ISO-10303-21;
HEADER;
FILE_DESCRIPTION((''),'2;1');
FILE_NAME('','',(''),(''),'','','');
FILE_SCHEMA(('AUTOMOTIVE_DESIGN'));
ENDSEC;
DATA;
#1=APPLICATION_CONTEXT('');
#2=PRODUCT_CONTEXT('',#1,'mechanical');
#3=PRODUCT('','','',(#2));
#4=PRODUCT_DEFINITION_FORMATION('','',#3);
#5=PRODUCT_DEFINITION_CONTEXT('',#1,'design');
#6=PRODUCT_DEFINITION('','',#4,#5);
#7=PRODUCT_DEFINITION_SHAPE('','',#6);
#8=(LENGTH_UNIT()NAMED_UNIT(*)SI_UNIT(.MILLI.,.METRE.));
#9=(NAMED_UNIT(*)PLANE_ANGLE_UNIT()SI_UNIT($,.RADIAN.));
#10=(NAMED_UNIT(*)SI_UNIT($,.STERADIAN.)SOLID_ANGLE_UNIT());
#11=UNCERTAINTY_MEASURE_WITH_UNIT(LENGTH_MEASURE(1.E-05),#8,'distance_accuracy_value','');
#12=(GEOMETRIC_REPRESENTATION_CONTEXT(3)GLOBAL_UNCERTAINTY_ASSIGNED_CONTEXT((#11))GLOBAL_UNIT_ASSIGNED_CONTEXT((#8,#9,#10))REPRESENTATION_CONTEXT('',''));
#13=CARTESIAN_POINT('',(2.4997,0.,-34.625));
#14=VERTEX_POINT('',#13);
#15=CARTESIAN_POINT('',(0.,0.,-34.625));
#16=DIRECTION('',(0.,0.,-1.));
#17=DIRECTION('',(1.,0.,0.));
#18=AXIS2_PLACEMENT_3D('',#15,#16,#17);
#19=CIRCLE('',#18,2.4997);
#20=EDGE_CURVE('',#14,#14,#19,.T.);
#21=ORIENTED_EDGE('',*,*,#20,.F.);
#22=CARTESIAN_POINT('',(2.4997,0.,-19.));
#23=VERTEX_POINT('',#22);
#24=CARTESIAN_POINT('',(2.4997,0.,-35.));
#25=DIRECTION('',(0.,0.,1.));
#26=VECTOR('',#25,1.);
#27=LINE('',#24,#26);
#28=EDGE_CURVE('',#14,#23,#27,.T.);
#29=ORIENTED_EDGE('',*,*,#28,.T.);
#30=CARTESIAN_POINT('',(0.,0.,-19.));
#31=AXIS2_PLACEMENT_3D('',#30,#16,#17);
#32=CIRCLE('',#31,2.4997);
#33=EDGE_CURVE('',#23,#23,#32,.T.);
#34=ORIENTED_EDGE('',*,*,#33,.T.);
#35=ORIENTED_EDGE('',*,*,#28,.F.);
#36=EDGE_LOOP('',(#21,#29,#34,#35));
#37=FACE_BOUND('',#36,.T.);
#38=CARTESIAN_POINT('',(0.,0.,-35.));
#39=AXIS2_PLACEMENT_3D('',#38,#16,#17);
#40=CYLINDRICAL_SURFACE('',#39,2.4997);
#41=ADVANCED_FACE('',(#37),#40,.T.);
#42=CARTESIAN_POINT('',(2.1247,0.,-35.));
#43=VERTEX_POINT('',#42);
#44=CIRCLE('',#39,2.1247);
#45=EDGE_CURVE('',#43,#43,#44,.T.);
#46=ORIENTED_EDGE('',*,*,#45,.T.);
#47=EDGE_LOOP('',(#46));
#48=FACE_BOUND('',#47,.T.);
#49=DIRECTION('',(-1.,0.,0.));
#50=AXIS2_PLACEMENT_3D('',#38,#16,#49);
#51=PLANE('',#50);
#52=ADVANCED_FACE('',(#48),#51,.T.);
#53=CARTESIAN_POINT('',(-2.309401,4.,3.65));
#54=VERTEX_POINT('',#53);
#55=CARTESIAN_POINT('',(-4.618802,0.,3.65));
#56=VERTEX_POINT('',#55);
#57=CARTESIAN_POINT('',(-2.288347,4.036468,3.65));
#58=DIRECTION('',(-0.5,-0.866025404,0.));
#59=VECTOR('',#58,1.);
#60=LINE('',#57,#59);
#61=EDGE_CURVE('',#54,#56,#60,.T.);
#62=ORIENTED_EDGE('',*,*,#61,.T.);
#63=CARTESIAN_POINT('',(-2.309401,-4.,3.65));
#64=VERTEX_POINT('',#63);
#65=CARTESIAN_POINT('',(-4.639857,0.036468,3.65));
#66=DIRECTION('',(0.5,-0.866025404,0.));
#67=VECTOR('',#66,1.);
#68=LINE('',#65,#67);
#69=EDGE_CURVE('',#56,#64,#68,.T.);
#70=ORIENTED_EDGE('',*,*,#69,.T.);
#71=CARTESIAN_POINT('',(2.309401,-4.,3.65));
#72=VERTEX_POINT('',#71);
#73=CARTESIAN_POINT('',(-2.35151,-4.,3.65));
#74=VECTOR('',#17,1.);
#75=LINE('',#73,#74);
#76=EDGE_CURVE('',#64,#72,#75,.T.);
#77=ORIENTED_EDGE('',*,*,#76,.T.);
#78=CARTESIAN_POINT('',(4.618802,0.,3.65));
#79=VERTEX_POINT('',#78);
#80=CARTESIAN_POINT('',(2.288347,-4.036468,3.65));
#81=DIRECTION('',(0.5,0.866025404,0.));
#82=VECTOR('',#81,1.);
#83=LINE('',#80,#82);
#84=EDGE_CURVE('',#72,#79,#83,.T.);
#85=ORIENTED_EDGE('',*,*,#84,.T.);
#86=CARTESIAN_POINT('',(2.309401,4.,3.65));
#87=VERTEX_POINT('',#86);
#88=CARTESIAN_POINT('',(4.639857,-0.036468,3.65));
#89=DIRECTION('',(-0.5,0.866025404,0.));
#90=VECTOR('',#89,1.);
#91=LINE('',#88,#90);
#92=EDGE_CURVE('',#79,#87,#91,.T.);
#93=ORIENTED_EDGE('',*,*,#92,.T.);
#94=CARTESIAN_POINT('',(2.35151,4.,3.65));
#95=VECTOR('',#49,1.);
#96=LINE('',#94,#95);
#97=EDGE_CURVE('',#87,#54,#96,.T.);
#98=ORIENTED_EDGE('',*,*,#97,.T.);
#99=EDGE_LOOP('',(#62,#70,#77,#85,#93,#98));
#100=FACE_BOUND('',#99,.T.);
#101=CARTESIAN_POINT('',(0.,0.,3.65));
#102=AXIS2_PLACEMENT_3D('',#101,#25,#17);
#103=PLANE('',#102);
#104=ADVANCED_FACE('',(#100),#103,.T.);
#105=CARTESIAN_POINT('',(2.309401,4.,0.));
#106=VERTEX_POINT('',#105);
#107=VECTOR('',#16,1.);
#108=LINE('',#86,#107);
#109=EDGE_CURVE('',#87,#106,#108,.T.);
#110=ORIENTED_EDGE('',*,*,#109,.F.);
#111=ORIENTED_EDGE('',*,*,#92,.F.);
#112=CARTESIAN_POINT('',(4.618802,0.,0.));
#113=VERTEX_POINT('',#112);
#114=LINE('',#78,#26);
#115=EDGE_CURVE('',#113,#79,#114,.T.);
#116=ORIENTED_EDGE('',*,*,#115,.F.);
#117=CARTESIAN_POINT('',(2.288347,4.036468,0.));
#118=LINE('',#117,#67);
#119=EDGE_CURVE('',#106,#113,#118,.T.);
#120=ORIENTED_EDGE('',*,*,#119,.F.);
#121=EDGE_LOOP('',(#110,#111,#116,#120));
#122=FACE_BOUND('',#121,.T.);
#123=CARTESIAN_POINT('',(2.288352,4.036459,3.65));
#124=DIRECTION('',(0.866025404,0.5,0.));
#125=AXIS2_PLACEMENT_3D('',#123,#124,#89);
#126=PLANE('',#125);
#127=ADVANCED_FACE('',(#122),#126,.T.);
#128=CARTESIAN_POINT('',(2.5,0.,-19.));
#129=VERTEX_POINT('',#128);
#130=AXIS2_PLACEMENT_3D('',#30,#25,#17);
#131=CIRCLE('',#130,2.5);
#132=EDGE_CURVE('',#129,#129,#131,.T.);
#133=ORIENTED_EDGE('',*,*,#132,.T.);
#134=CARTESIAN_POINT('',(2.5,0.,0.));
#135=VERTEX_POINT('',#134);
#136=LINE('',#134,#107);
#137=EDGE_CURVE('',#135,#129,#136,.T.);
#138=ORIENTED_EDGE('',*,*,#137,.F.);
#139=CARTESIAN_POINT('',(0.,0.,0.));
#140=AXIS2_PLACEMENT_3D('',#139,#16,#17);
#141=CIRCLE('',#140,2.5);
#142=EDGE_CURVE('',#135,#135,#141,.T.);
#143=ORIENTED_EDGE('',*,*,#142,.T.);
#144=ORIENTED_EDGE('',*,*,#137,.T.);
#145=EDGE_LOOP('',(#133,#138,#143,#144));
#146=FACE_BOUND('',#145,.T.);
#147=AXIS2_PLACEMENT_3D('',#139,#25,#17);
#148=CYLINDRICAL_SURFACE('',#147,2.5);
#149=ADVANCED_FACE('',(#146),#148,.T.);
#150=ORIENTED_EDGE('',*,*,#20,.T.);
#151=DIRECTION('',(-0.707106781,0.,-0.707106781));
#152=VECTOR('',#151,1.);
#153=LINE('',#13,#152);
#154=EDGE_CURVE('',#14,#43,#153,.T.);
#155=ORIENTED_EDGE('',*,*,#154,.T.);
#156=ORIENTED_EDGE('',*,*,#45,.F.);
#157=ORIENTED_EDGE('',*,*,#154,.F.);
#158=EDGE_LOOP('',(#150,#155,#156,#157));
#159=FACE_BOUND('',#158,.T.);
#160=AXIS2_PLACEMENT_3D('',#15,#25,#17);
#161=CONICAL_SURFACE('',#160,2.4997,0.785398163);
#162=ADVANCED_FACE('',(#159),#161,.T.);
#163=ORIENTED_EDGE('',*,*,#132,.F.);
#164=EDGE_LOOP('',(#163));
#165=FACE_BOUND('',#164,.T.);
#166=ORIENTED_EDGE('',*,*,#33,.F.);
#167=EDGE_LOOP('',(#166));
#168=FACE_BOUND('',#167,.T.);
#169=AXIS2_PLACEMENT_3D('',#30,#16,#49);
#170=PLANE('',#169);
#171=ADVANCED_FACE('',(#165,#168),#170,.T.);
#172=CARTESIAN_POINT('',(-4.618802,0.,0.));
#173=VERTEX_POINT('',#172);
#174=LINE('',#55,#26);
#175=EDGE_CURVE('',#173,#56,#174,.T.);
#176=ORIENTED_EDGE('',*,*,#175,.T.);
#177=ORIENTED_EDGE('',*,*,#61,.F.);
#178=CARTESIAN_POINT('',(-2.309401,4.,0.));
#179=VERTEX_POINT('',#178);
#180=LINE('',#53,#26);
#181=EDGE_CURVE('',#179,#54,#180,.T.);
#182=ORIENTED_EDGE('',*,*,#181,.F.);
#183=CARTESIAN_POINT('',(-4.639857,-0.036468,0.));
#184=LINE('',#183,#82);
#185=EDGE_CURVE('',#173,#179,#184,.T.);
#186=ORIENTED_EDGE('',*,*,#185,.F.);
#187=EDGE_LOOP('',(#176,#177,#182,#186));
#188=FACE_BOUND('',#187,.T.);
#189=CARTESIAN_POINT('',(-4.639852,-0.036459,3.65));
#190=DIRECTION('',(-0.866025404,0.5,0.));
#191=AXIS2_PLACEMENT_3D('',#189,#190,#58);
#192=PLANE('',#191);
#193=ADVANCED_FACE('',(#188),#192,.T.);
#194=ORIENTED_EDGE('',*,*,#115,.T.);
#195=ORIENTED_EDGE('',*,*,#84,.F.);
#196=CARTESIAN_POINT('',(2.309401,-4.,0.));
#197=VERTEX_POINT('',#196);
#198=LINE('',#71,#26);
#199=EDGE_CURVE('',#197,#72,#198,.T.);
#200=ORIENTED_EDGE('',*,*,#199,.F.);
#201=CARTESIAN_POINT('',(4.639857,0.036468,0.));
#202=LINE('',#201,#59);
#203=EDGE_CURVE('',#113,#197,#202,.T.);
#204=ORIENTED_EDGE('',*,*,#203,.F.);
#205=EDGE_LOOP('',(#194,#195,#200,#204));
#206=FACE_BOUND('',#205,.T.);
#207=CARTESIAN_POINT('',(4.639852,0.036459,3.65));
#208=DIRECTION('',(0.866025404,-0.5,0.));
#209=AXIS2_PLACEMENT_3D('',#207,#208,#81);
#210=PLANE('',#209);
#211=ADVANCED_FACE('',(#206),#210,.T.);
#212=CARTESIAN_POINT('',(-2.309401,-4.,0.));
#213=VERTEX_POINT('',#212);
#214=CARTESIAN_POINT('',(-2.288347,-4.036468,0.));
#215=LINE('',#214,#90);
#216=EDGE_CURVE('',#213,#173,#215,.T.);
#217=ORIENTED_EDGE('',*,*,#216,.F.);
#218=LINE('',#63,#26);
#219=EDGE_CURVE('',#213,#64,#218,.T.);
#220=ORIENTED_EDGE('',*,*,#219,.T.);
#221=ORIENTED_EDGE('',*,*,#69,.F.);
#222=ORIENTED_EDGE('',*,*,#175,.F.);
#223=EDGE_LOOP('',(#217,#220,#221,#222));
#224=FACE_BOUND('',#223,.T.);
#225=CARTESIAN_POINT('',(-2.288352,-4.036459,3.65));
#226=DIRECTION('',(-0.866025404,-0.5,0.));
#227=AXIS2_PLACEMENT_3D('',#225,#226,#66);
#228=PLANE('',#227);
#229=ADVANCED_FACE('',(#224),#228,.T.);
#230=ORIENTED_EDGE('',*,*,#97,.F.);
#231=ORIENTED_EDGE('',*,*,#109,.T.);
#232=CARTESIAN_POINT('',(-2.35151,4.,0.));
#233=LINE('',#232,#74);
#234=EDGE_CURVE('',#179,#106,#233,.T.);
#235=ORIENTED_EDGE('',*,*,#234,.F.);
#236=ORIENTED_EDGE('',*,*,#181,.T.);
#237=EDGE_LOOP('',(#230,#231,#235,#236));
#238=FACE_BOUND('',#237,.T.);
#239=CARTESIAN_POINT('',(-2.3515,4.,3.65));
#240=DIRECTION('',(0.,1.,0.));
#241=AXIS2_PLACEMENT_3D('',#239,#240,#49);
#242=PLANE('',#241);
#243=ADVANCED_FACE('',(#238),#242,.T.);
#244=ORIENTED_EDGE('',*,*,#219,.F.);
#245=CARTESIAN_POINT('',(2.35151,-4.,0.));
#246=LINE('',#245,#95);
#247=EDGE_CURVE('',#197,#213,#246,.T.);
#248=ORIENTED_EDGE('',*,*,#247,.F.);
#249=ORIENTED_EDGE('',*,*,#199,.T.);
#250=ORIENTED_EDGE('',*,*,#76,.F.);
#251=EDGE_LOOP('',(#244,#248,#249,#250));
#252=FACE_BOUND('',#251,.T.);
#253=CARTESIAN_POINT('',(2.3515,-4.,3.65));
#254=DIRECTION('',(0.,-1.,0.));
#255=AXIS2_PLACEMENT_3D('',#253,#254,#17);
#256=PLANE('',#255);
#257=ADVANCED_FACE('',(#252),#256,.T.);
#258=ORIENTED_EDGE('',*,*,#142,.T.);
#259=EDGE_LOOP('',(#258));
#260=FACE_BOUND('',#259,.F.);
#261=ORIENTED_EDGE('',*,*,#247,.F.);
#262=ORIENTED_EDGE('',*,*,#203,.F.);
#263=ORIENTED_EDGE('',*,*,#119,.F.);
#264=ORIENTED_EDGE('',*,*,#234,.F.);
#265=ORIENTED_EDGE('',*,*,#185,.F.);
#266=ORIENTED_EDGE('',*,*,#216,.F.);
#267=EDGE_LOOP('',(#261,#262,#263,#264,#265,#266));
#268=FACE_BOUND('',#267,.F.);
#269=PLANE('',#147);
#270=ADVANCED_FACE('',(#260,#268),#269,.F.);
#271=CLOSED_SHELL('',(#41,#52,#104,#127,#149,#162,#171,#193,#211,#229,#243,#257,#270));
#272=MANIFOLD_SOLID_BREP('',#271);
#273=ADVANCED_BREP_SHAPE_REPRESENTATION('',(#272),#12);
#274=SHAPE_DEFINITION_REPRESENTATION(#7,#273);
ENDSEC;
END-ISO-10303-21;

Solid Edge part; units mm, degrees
sketch "Sketch1" plane through (0, 0, 0) normal (0, 0, 1) x (1, 0, 0)
  circle A0 centre (0, 0) radius 4.64
  dimension "D1" = 9.28
extrude "Protrusion1" add sketch "Sketch1" along normal blind 3.65
sketch "Sketch2" plane through (0, 0, 0) normal (0, 0, -1) x (1, 0, 0)
  circle A0 centre (0, 0) radius 2.5
extrude "Protrusion2" add sketch "Sketch2" along normal blind 35
sketch "Sketch3" plane through (0, 0, -35) normal (0, 0, -1) x (1, 0, 0)
  circle A0 centre (0, 0) radius 2.4997
extrude "Cutout1" cut sketch "Sketch3" against normal blind 16 flip side to cut
chamfer "Chamfer_1" distance 0.375 angle 45 1 edges at (-2.4997, 0, -35)
sketch "Sketch4" plane through (0, 0, 3.65) normal (0, 0, 1) x (1, 0, 0)
  line L0 (-2.3515, 4) -> (2.3515, 4)
  dimension "D1" = 8
extrude "Cutout2" cut sketch "Sketch4" against normal up to next material side at (0, 4.05, 3.65)
pattern_circular "Pattern1" count 6 over 360 about axis through (0, 0, 3.65) along (0, 0, 1) of "Cutout2"
properties part number "134296"
